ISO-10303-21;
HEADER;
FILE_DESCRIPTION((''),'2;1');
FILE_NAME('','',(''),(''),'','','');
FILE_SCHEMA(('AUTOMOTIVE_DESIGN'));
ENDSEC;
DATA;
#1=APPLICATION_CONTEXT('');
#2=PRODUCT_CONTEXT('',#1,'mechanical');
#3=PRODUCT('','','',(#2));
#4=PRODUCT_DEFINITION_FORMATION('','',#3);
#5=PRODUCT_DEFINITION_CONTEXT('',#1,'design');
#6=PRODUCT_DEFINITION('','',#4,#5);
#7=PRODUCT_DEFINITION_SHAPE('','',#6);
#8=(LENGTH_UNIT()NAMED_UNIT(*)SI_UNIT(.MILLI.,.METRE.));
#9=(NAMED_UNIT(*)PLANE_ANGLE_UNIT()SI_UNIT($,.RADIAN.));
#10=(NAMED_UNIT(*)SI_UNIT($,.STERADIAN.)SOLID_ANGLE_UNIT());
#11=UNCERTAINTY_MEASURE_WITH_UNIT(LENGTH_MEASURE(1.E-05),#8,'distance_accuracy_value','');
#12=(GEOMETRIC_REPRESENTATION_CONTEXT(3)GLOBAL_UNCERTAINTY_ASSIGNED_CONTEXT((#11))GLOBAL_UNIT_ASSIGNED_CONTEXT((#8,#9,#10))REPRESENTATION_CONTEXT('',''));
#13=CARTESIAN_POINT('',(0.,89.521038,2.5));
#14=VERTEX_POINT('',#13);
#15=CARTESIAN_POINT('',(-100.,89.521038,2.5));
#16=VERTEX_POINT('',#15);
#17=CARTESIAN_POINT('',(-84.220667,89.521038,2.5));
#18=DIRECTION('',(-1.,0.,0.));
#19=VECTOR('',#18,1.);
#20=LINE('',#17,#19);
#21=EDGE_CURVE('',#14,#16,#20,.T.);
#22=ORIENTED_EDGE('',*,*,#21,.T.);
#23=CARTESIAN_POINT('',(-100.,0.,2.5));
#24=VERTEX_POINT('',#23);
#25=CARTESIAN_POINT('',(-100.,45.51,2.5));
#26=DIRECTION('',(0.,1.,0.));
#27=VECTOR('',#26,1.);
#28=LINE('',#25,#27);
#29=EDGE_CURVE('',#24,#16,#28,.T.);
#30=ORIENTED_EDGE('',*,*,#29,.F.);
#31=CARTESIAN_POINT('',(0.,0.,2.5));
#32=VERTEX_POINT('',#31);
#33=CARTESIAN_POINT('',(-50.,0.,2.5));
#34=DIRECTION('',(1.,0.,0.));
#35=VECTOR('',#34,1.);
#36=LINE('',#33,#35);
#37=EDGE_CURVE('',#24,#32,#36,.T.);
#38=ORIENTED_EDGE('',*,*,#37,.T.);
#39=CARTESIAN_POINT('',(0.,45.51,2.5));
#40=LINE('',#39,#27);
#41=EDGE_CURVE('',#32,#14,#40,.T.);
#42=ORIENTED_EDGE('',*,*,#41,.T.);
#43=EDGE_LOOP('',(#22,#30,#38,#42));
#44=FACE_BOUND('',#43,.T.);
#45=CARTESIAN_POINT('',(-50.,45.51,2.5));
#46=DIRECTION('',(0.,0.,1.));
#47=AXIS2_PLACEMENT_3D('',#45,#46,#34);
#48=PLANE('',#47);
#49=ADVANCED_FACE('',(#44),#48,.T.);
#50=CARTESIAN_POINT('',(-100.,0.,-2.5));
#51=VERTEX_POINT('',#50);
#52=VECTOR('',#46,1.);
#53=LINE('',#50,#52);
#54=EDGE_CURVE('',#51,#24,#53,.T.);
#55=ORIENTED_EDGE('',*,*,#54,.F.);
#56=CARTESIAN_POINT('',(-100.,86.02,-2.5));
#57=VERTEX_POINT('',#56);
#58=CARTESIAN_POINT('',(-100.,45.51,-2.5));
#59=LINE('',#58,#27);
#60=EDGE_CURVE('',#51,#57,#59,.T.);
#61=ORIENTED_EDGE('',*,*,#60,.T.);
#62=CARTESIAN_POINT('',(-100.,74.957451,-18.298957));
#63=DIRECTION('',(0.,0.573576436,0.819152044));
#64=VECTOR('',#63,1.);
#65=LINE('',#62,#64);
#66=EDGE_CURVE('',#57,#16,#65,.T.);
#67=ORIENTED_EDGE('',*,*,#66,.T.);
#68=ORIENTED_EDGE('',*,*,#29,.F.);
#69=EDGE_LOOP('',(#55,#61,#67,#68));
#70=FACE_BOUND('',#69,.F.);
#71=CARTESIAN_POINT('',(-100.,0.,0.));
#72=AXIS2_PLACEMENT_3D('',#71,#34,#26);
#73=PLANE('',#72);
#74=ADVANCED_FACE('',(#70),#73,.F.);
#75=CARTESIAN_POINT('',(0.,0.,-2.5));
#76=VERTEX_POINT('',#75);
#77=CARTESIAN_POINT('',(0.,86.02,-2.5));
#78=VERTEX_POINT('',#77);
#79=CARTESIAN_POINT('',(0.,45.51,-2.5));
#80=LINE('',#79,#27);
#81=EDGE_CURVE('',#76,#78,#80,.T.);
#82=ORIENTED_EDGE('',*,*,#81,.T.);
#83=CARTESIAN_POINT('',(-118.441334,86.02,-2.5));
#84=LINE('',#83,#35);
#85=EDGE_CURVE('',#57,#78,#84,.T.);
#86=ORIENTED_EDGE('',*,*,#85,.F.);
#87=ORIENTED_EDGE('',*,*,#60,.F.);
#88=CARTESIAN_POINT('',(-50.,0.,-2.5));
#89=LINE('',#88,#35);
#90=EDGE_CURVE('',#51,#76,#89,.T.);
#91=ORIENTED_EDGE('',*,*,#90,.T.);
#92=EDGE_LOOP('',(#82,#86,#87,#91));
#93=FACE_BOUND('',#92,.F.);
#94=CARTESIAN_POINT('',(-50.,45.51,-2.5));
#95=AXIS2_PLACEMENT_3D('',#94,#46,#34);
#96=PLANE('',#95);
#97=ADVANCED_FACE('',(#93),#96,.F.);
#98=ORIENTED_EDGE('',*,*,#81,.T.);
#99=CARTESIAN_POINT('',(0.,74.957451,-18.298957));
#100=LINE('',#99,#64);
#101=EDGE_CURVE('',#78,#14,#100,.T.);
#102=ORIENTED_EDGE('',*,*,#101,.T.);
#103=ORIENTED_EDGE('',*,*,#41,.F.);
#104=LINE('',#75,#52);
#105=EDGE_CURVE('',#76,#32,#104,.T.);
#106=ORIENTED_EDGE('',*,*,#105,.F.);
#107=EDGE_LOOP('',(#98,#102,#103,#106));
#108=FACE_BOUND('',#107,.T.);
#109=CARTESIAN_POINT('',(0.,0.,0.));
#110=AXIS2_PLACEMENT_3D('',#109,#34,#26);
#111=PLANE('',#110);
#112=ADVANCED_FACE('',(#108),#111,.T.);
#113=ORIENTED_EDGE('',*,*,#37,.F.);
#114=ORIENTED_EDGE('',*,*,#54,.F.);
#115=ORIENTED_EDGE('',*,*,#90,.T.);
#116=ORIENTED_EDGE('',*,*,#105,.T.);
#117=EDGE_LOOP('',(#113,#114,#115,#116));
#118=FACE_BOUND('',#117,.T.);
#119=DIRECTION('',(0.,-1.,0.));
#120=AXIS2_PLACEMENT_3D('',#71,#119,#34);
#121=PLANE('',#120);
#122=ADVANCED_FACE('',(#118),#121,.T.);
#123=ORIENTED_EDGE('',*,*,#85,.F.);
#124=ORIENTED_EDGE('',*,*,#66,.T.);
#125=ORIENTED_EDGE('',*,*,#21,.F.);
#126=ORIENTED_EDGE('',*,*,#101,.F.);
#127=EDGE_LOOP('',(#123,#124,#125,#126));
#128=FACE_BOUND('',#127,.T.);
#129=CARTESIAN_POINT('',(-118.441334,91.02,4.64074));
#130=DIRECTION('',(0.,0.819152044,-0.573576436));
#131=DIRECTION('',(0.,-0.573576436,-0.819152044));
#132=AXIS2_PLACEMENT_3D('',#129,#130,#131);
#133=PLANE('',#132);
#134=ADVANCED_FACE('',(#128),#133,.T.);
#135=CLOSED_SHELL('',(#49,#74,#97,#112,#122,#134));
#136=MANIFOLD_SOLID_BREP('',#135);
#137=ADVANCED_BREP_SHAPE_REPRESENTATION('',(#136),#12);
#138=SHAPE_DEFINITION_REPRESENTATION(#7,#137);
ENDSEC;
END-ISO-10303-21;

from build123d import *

# Parameters (mm, degrees)
F0_W        = 100
F0_H        = 91.02
F1_DEPTH    = 2.5
F2_T1_DEPTH = 136.8826681999


# Not quite as in the source:
# - a fillet or chamfer that OpenCascade refuses, or shapes differently, is made with other operations: its cross-section is extruded or revolved along the edge and cut away or added


with BuildPart() as f1:
    # F0 (on Top) → F1 (new body, symmetric)
    with BuildSketch(Plane.XY):
        with Locations((-50, 45.51)):
            Rectangle(F0_W, F0_H)
    extrude(amount=F1_DEPTH, both=True)

    # F2: chamfer of 5 x 7.1407400337 on 1 edges, made by hand

    # F2_s2 → F2_t1 (cut)
    with BuildSketch(Plane.YZ.offset(-118.4413340999)):
        Polygon((91.02, 4.6407400337), (86.02, -2.5), (91.02, -2.5), align=None)
    extrude(amount=F2_T1_DEPTH, mode=Mode.SUBTRACT)


solid = f1.part
